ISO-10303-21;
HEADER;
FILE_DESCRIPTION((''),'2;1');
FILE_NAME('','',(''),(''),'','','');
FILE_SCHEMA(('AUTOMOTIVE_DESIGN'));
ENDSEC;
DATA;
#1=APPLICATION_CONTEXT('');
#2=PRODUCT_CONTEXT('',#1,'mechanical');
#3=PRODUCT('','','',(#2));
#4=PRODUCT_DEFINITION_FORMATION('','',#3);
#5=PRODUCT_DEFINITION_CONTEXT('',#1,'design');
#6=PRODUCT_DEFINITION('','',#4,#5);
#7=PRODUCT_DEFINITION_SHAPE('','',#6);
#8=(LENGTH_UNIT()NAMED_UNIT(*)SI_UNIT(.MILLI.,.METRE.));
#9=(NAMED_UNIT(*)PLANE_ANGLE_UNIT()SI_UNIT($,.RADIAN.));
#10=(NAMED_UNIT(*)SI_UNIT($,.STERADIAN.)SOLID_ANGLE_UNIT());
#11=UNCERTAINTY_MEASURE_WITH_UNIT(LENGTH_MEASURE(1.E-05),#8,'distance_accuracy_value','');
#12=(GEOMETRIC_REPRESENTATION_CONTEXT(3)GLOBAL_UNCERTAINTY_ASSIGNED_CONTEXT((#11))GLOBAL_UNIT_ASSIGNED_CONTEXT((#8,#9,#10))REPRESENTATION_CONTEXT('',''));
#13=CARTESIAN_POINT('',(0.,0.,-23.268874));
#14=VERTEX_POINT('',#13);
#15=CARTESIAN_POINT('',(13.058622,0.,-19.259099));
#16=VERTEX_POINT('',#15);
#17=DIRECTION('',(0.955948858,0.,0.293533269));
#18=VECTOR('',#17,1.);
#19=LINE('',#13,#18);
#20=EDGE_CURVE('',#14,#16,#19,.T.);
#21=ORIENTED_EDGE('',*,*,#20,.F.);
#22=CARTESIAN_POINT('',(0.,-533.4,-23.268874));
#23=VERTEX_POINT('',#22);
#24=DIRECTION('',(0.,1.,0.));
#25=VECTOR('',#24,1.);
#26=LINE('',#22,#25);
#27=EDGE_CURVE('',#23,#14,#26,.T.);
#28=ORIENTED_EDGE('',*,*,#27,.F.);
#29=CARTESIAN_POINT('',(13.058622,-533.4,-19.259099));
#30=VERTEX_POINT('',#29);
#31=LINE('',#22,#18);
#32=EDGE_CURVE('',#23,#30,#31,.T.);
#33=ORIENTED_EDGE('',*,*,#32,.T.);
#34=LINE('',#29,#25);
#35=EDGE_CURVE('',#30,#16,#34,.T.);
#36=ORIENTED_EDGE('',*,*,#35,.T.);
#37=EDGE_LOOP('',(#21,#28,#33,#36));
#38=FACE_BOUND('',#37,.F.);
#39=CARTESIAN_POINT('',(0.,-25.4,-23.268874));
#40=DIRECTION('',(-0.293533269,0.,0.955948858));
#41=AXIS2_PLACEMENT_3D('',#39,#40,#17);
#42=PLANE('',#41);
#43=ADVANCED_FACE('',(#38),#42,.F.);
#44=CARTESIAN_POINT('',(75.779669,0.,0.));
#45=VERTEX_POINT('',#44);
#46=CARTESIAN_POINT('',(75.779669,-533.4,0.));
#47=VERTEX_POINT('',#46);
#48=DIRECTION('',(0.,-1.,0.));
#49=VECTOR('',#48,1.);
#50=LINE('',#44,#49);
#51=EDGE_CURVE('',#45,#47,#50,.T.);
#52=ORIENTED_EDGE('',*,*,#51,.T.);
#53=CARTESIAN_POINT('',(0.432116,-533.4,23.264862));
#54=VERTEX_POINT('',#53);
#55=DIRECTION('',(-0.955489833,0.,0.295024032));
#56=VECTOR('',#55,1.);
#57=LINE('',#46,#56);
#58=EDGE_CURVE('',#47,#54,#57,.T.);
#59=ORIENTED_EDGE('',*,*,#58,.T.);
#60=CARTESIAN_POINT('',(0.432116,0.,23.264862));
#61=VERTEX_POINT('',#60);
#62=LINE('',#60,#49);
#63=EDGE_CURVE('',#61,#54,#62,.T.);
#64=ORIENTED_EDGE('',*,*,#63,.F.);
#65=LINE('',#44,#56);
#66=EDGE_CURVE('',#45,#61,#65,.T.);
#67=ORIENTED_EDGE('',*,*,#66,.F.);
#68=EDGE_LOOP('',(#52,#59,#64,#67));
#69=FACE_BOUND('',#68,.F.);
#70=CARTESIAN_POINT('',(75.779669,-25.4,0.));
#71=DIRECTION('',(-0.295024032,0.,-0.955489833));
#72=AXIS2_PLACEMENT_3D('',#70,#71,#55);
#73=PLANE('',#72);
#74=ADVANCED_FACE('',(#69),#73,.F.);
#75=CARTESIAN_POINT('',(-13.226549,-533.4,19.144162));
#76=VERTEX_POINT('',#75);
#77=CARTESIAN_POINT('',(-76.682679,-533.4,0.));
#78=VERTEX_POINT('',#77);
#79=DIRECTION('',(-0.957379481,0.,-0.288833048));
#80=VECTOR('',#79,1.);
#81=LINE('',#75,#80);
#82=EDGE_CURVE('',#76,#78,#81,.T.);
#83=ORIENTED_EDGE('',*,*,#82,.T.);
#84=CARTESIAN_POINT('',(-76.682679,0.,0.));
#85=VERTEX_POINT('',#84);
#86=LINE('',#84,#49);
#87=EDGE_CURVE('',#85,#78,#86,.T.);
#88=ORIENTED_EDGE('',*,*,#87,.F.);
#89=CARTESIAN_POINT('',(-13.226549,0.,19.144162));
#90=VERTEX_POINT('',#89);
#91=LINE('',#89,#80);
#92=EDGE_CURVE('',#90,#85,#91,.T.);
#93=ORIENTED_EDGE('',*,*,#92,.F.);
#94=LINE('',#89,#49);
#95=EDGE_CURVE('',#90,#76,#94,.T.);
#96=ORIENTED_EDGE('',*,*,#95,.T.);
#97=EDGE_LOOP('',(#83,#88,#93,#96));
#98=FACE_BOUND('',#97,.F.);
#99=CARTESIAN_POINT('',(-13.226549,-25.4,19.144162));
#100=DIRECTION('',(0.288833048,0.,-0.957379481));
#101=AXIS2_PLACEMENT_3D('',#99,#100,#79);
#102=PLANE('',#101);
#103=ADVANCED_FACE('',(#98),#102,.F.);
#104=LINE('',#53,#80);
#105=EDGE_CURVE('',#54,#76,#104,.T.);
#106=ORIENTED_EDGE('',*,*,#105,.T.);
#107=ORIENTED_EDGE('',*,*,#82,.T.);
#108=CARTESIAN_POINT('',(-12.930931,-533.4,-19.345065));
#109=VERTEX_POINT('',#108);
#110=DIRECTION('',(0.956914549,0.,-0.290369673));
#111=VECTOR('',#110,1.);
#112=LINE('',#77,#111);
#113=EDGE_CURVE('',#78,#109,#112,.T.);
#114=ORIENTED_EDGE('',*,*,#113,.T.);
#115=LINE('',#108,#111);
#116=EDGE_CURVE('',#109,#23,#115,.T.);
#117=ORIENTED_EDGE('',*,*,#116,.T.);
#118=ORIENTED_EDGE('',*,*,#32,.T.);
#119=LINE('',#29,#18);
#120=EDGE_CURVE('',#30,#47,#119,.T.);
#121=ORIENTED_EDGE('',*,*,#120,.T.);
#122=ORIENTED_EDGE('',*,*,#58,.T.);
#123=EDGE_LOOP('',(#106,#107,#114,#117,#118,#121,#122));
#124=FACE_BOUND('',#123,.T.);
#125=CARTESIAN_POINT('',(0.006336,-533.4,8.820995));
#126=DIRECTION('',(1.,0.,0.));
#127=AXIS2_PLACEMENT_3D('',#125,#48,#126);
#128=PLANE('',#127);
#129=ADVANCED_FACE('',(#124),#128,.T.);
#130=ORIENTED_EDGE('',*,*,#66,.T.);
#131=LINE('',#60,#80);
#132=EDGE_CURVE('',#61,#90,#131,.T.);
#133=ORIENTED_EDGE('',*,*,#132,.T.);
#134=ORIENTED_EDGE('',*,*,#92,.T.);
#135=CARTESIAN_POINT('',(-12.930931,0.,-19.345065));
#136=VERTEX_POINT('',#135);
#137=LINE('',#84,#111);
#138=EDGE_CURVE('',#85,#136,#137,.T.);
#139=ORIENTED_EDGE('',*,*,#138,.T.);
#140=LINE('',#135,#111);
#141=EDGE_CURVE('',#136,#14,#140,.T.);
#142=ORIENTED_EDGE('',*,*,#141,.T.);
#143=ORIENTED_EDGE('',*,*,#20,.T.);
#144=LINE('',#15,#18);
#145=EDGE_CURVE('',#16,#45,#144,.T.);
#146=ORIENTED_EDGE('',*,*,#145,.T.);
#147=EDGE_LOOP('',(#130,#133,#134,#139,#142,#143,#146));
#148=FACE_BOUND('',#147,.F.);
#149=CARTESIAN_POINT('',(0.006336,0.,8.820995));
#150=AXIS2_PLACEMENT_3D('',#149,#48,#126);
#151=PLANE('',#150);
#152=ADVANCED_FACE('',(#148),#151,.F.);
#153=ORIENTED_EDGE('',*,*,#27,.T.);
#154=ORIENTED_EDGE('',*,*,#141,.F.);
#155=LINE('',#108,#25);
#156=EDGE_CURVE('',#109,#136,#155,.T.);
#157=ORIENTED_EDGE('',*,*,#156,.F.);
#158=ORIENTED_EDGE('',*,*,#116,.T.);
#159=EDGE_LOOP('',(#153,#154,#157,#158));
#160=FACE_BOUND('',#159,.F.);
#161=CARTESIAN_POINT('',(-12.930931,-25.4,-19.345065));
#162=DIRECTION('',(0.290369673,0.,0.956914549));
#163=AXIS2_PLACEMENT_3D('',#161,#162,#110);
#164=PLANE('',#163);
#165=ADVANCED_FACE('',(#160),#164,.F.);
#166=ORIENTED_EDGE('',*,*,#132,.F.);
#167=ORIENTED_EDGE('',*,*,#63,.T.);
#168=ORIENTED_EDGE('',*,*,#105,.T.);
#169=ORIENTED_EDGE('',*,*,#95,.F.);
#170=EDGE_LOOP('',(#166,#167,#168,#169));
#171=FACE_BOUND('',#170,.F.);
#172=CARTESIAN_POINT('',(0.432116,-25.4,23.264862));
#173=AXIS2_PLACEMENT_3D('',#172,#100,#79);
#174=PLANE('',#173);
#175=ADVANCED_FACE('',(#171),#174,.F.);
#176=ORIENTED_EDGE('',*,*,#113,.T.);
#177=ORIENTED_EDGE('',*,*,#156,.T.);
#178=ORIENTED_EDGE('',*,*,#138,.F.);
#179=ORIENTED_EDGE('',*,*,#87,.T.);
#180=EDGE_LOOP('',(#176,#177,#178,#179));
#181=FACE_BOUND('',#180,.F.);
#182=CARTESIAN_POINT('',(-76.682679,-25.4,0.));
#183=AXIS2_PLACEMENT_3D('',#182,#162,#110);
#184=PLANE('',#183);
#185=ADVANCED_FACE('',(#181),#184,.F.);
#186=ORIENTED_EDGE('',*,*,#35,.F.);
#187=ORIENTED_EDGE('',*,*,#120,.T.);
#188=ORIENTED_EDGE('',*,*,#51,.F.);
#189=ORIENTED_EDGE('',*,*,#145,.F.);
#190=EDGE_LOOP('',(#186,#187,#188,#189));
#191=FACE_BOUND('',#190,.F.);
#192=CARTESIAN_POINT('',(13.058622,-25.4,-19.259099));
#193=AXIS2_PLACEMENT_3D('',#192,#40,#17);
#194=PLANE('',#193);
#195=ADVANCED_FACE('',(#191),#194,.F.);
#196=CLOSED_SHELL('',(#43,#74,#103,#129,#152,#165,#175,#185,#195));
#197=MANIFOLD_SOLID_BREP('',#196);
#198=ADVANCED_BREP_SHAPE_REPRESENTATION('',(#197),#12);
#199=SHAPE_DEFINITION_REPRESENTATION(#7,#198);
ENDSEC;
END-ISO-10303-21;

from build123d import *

# Parameters (mm, degrees)
F1_DEPTH = 25.4
F2_DEPTH = 508


with BuildPart() as f1:
    # F0 (on Front) → F1 (new body)
    with BuildSketch(Plane.XZ):
        with BuildLine():
            Line((-23.26887446, 0), (23.26887446, 0))
            ThreePointArc((23.26887446, 0), (20.4736338233, 11.0576144219), (12.7594845956, 19.4585732131))
            Line((12.7594845956, 19.4585732131), (0.4321157806, 23.2648618003))
            Line((0.4321157806, 23.2648618003), (-13.2265486778, 19.1441617396))
            ThreePointArc((-13.2265486778, 19.1441617396), (-20.6059144344, 10.8091076855), (-23.26887446, 0))
        make_face()
        with BuildLine():
            Line((75.7796689868, 0), (23.26887446, 0))
            ThreePointArc((23.26887446, 0), (20.5584527971, -10.8991071756), (13.0586223544, -19.2590991701))
            Line((13.0586223544, -19.2590991701), (75.7796689868, 0))
        make_face()
        with BuildLine():
            ThreePointArc((12.7594845956, 19.4585732131), (20.4736338233, 11.0576144219), (23.26887446, 0))
            Line((23.26887446, 0), (75.7796689868, 0))
            Line((75.7796689868, 0), (12.7594845956, 19.4585732131))
        make_face()
        with BuildLine():
            ThreePointArc((13.0586223544, -19.2590991701), (20.5584527971, -10.8991071756), (23.26887446, 0))
            Line((23.26887446, 0), (-23.26887446, 0))
            ThreePointArc((-23.26887446, 0), (-20.5222893701, -10.9670487209), (-12.9309307101, -19.3450652521))
            Line((-12.9309307101, -19.3450652521), (0, -23.26887446))
            Line((0, -23.26887446), (13.0586223544, -19.2590991701))
        make_face()
        with BuildLine():
            Line((-76.6826793551, 0), (-23.26887446, 0))
            ThreePointArc((-23.26887446, 0), (-20.6059144344, 10.8091076855), (-13.2265486778, 19.1441617396))
            Line((-13.2265486778, 19.1441617396), (-76.6826793551, 0))
        make_face()
        with BuildLine():
            ThreePointArc((-12.9309307101, -19.3450652521), (-20.5222893701, -10.9670487209), (-23.26887446, 0))
            Line((-23.26887446, 0), (-76.6826793551, 0))
            Line((-76.6826793551, 0), (-12.9309307101, -19.3450652521))
        make_face()
    extrude(amount=F1_DEPTH)

    # F2 (add): a face of the model
    f2_faces = [f1.faces().sort_by_distance(p)[0] for p in [
        (-0.2289903697, -25.4, -0.0013375532),
    ]]
    extrude(f2_faces, amount=F2_DEPTH)


solid = f1.part
